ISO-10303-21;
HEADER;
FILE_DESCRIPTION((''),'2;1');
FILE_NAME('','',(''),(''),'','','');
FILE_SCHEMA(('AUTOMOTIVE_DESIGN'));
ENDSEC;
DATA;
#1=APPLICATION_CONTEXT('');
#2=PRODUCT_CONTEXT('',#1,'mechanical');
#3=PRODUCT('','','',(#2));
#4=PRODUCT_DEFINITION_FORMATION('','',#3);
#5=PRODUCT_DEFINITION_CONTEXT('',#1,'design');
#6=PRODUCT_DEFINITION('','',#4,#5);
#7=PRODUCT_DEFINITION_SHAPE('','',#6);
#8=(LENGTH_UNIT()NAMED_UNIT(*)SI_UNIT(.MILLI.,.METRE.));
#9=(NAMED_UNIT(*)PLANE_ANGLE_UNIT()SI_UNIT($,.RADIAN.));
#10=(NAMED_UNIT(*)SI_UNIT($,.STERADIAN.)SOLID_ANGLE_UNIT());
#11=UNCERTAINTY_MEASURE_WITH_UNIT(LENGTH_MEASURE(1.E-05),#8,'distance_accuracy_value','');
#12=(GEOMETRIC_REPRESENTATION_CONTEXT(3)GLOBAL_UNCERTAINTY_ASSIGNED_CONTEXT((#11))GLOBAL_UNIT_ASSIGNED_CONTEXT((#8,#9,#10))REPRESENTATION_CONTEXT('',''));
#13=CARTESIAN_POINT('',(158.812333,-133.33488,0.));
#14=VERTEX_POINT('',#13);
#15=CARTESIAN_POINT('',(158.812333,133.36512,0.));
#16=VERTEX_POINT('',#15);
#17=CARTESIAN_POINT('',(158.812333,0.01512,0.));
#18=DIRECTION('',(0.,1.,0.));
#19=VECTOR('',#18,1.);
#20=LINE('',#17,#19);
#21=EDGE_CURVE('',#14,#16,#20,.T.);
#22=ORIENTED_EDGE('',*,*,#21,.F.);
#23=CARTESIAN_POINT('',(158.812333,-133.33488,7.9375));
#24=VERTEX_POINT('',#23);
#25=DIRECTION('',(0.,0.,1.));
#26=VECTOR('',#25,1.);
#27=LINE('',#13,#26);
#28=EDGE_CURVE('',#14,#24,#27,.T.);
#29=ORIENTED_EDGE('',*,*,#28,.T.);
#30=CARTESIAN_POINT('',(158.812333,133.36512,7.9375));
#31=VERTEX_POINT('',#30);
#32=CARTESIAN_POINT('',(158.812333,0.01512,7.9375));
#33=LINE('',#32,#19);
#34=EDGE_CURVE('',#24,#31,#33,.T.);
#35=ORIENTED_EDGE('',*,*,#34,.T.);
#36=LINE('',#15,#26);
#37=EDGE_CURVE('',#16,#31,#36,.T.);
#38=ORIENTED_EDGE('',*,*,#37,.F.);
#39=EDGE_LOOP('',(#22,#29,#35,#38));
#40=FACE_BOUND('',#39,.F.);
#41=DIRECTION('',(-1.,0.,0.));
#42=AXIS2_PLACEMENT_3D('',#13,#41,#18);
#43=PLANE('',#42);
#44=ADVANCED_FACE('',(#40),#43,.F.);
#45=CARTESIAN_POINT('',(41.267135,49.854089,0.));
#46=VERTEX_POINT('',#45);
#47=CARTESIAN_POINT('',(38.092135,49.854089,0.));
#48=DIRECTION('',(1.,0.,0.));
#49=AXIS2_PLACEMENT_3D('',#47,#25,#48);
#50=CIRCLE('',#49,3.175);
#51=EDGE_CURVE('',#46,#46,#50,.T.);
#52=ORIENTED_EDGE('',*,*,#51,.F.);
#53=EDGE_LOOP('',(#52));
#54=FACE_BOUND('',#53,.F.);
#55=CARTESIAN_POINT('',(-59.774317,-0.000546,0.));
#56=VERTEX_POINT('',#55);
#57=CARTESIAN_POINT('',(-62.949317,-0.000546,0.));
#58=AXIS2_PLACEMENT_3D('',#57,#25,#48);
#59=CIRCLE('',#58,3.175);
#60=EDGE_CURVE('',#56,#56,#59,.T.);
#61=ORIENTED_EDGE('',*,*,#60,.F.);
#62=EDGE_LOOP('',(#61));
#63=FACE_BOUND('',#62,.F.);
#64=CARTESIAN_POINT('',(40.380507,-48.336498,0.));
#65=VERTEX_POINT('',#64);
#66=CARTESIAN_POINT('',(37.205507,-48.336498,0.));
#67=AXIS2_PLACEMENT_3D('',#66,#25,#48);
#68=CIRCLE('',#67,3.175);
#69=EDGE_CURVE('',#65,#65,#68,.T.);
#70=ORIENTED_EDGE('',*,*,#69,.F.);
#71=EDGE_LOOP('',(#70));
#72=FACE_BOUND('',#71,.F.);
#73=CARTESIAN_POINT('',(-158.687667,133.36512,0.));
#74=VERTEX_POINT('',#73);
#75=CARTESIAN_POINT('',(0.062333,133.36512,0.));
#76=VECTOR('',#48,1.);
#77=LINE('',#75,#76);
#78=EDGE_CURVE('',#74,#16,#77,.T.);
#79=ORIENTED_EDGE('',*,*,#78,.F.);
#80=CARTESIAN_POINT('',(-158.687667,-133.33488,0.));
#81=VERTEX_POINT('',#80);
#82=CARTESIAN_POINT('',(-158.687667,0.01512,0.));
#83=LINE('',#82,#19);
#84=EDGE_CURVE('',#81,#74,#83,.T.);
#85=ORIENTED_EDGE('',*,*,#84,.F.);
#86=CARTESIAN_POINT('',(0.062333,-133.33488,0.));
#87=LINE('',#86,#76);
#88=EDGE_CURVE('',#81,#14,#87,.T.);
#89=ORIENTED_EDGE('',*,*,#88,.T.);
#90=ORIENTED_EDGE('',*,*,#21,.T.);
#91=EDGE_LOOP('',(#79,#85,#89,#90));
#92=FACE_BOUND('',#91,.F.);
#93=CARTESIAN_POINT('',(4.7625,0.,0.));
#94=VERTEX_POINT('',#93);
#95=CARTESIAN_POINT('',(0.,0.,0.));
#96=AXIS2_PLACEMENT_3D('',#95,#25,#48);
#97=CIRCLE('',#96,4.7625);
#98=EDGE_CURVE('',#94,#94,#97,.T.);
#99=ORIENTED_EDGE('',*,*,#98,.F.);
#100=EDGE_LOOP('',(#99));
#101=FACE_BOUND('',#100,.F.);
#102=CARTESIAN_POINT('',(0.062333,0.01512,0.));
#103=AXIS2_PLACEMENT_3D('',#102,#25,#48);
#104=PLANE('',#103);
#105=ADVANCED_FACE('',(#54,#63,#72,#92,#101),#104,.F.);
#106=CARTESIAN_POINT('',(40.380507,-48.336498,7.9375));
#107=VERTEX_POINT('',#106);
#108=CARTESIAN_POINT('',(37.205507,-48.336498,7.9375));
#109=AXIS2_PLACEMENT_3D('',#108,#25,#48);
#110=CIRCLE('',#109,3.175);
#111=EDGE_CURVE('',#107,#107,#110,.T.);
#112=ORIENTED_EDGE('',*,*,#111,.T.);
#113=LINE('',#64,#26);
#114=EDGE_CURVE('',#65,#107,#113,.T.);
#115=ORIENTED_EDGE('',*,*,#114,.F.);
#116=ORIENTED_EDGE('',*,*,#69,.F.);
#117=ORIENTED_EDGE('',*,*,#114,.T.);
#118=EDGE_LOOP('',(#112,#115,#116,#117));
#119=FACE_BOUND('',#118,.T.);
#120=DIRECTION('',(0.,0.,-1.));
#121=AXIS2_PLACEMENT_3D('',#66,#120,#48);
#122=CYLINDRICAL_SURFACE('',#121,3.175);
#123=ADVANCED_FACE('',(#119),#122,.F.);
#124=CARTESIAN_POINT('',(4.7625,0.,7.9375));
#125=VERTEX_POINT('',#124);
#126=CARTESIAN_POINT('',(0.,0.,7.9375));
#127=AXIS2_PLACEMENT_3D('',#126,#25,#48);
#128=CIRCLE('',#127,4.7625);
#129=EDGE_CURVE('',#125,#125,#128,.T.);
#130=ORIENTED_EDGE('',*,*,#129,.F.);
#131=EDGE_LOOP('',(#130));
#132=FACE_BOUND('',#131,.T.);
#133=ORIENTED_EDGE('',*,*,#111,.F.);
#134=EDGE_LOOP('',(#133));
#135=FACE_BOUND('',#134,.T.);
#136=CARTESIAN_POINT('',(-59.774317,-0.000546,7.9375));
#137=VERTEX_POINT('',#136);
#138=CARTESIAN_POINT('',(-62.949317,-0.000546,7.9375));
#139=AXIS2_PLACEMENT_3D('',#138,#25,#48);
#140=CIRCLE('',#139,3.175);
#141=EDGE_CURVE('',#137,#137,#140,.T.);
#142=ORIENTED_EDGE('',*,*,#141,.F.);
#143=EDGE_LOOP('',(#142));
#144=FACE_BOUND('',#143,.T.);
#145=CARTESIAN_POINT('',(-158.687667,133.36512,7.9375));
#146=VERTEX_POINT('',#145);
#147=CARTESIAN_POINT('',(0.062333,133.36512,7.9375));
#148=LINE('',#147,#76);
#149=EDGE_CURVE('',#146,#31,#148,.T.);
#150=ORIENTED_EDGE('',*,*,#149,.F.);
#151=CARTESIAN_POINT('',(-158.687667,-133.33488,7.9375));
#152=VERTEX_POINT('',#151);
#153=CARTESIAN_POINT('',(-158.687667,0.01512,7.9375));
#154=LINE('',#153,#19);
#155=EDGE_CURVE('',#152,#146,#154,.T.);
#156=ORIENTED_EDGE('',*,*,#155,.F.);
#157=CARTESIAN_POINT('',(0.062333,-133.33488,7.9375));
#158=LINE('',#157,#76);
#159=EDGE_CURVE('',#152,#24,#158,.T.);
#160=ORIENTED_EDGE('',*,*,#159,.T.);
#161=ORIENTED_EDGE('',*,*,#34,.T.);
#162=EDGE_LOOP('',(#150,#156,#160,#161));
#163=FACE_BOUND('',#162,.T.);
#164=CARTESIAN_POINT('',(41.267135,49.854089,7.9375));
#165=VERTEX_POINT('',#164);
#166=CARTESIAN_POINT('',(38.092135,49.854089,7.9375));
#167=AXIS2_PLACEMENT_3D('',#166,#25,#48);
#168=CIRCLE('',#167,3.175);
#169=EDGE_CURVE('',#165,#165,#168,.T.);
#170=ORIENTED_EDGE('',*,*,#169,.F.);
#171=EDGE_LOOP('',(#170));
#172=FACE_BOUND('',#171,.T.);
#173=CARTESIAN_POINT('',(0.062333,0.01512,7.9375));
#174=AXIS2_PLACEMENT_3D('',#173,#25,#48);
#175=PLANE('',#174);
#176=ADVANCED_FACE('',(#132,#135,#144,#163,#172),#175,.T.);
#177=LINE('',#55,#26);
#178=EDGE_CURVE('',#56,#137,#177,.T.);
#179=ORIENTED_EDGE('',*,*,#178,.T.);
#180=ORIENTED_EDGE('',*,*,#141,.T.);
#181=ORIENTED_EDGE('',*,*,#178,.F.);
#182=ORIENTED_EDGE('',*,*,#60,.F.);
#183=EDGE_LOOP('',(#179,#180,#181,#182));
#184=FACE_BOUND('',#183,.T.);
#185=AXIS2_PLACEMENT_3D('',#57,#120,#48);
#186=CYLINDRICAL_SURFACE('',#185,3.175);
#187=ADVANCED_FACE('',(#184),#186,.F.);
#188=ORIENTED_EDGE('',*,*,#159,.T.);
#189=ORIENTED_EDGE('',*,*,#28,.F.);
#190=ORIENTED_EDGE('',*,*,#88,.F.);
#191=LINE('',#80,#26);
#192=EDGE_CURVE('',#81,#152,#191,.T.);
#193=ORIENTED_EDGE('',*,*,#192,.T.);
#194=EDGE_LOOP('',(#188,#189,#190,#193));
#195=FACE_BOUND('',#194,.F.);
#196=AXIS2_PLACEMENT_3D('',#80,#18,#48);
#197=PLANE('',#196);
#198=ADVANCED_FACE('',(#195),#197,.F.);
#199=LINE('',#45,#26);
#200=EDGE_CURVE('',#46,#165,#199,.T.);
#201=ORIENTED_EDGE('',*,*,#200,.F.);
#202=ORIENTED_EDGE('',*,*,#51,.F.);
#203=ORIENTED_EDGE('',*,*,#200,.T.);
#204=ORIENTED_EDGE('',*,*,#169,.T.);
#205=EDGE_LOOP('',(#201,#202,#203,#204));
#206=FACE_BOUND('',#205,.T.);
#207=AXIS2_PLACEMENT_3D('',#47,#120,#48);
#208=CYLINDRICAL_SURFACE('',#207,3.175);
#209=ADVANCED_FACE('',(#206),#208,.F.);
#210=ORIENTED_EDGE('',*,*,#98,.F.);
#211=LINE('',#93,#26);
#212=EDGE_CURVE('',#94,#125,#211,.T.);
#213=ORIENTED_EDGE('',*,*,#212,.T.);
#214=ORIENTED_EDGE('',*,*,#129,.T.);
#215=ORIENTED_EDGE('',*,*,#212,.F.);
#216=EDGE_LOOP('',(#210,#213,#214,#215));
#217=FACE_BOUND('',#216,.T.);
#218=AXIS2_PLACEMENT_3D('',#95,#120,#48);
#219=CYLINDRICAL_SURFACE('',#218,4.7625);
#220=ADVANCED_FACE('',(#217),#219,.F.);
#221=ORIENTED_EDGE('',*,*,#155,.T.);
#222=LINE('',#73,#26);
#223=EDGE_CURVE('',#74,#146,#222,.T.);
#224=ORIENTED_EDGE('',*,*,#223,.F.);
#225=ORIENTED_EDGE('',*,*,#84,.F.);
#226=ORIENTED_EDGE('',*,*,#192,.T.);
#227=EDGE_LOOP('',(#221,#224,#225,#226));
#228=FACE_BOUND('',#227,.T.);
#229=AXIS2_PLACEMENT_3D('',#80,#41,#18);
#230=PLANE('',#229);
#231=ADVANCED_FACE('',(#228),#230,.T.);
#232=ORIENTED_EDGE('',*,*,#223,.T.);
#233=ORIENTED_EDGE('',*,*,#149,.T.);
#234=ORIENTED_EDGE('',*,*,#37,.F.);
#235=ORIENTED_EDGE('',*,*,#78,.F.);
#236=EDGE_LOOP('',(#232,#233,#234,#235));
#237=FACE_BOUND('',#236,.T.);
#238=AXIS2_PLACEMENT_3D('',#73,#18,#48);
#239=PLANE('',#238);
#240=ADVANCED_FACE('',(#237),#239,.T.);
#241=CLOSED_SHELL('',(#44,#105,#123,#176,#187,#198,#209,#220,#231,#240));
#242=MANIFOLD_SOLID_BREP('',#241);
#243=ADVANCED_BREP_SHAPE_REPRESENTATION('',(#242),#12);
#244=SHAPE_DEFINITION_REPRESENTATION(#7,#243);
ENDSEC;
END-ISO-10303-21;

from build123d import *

# Parameters (mm, degrees)
F0_W     = 317.5
F0_H     = 266.7
F0_R     = 3.175
F0_R_2   = 4.7625
F1_DEPTH = 7.9375


# Not quite as in the source:
# - a feature names something its author has since deleted; it is built from what else it names


with BuildPart() as f1:
    # F0 (on Top) → F1 (new body)
    with BuildSketch(Plane.XY):
        with Locations((0.0623334384, 0.0151203394)):
            Rectangle(F0_W, F0_H)
        with Locations((-62.9493173903, -0.0005464993)):
            Circle(F0_R, mode=Mode.SUBTRACT)
        Circle(F0_R_2, mode=Mode.SUBTRACT)
        with Locations((37.2055072098, -48.3364977443)):
            Circle(F0_R, mode=Mode.SUBTRACT)
        with Locations((38.0921348072, 49.8540893279)):
            Circle(F0_R, mode=Mode.SUBTRACT)
    extrude(amount=F1_DEPTH)


solid = f1.part
